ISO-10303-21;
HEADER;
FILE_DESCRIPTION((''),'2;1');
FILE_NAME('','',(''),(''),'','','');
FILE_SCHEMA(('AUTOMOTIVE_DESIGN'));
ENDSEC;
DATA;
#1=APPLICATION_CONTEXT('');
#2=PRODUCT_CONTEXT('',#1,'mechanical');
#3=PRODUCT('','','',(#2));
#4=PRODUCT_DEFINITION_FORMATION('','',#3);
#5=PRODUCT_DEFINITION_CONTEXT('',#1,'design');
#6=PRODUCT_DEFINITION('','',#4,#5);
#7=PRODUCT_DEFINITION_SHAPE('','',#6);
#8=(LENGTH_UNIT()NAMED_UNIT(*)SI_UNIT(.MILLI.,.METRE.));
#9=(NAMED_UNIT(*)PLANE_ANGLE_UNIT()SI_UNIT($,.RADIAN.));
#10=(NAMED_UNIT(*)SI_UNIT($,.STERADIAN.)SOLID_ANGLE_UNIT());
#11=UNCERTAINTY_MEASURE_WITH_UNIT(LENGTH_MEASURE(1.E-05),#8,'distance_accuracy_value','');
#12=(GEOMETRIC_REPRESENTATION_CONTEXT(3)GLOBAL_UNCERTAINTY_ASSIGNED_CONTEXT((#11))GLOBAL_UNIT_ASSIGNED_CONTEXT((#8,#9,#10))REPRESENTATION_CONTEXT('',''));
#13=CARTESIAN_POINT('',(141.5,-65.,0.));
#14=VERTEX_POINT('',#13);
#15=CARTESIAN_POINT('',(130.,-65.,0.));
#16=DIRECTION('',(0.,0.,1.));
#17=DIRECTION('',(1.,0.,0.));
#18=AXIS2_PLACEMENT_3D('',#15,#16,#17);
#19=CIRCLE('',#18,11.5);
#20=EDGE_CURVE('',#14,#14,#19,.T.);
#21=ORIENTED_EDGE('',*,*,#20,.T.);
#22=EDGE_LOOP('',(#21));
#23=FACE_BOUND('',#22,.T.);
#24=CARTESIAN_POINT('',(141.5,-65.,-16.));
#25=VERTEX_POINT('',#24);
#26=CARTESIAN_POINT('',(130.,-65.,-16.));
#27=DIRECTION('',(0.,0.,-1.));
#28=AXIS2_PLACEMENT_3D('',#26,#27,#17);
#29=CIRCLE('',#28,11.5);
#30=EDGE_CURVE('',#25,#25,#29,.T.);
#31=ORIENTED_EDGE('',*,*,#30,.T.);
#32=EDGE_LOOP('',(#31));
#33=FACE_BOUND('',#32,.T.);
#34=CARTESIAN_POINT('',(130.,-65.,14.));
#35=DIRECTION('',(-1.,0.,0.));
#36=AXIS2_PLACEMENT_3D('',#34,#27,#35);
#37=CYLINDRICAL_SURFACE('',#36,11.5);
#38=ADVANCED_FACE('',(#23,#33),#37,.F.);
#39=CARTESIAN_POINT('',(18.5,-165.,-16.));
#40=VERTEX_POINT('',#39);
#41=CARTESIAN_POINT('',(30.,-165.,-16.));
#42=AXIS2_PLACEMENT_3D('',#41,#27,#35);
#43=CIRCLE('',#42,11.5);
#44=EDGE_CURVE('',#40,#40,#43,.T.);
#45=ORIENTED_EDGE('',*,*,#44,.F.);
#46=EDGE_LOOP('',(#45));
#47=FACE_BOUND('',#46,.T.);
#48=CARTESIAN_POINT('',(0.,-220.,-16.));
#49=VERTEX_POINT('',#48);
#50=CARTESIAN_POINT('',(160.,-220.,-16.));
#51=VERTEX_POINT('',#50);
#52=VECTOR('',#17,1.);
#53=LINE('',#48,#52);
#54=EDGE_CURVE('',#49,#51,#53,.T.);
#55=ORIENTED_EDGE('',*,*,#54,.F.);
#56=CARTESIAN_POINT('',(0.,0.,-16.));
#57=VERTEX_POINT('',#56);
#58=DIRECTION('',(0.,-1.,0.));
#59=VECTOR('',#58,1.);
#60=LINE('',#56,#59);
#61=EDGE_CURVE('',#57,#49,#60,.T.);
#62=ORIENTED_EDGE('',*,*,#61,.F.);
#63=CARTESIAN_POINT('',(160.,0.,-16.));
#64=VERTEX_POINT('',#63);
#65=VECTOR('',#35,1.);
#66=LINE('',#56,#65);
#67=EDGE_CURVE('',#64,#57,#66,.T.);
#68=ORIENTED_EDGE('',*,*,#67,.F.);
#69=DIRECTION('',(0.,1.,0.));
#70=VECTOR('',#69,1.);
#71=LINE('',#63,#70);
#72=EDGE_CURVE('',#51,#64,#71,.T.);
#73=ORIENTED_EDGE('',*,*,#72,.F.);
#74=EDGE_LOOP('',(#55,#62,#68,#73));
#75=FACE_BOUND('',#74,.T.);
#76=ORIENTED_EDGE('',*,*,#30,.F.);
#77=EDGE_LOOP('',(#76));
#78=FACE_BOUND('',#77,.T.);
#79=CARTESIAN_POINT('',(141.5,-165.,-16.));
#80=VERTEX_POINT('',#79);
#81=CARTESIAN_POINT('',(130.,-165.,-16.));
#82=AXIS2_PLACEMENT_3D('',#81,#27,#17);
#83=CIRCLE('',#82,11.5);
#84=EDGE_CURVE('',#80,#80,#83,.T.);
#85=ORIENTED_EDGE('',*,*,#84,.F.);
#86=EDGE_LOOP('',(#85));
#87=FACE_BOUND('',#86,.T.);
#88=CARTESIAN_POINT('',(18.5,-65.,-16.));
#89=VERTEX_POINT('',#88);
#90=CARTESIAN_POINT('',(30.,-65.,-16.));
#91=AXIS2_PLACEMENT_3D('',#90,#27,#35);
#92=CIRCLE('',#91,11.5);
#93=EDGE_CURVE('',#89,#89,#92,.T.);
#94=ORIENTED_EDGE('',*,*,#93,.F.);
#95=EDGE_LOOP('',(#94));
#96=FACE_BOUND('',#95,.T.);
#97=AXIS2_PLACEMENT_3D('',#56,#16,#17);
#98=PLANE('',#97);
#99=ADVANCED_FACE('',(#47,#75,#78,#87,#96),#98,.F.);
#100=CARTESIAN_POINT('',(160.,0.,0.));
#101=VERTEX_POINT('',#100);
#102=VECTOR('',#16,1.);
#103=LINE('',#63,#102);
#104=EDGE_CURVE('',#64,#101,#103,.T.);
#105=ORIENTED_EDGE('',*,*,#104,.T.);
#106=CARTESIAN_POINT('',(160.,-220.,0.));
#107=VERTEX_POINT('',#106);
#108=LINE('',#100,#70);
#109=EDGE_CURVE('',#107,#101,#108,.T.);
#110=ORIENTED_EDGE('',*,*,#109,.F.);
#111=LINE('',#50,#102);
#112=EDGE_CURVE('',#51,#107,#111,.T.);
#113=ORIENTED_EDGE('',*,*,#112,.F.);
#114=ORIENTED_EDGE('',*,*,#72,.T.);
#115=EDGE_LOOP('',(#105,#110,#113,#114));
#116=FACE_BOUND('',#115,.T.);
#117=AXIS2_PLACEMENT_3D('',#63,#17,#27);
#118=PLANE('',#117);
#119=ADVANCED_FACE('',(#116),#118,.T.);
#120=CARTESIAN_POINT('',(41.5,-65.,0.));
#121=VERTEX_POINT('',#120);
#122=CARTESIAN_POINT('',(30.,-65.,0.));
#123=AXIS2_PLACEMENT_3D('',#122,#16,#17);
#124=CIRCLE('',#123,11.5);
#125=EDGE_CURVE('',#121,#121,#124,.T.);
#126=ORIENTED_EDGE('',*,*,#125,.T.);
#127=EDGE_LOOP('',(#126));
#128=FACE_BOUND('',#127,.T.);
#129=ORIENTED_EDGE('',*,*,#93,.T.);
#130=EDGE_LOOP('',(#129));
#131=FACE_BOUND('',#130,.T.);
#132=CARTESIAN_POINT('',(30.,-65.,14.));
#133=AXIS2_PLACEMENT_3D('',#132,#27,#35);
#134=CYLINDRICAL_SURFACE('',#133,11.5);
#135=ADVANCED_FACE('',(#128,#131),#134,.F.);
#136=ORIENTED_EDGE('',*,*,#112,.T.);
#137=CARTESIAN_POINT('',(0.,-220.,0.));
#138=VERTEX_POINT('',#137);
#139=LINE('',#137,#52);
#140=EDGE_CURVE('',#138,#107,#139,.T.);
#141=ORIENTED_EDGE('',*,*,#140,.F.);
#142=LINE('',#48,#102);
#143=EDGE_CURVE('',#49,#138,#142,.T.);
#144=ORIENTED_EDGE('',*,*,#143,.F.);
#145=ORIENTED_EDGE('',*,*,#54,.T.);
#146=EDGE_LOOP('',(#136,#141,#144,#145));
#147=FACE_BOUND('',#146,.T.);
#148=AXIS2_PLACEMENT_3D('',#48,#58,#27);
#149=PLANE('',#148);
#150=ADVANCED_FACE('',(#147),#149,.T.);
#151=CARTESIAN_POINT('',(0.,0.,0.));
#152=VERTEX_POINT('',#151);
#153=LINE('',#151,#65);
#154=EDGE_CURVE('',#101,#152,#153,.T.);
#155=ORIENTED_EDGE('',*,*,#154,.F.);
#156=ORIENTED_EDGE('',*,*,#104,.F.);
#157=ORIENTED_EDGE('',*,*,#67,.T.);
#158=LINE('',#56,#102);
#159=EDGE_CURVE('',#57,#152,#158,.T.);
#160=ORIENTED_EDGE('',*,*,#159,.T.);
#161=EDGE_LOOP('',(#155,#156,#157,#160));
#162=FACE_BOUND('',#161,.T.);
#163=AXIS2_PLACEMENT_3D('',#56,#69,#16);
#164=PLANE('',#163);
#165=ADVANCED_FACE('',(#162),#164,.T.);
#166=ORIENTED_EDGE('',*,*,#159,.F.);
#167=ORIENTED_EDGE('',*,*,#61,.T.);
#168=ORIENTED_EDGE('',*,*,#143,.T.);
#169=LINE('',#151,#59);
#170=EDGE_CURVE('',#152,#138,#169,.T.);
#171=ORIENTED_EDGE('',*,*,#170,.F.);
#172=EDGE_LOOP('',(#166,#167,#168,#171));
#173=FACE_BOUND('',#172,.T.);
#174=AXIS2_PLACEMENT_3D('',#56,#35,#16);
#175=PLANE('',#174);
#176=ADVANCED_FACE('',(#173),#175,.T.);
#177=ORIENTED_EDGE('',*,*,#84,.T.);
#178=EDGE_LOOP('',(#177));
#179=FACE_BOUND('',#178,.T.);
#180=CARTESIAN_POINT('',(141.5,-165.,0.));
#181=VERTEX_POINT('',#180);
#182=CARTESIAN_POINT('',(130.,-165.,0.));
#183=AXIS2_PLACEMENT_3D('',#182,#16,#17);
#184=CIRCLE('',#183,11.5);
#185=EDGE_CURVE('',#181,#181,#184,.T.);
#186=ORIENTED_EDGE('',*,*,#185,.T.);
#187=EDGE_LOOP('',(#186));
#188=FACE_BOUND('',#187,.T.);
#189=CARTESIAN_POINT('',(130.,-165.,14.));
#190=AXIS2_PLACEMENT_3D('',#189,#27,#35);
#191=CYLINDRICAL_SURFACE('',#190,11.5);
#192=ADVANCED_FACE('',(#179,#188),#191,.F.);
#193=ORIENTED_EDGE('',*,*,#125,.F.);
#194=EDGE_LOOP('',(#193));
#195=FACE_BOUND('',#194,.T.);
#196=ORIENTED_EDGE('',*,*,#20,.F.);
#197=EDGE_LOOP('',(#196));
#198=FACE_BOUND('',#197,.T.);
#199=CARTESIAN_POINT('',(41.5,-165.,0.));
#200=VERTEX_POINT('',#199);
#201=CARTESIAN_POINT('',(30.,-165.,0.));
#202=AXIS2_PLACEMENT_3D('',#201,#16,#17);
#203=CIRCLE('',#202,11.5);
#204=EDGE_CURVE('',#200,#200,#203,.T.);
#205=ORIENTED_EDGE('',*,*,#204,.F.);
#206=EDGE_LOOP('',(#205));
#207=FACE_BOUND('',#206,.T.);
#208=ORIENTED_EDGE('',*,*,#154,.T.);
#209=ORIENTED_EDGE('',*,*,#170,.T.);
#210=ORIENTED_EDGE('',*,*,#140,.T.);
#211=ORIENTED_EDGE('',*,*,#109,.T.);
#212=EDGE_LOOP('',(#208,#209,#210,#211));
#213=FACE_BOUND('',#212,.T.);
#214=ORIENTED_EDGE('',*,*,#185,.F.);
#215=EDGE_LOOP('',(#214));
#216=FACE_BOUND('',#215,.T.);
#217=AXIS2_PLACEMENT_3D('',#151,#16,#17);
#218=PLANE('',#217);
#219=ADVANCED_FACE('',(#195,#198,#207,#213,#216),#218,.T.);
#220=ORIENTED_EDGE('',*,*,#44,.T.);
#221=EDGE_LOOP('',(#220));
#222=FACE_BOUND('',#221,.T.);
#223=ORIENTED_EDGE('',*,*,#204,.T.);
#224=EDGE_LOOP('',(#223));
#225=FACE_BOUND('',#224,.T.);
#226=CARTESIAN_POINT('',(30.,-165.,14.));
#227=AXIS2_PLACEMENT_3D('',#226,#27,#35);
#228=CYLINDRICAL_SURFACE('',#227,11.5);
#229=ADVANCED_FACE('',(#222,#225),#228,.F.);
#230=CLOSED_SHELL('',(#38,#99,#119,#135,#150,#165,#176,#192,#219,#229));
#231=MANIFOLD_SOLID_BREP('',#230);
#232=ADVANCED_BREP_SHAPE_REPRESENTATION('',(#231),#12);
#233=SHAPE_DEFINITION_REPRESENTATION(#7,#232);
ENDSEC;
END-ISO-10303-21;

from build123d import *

# Parameters (mm, degrees)
SKETCH_1_W             = 160
SKETCH_1_H             = 220
SM_BASE_FLANGE_1_DEPTH = 16
SKETCH_2_R             = 11.5
CUT_EXTRUDE_1_DEPTH    = 30


# Sheet-metal steps are written as plain solids
with BuildPart() as part:
    # Sketch 1 → Базовая кромка1 (new body)
    with BuildSketch(Plane.XY):
        with Locations((80, -110)):
            Rectangle(SKETCH_1_W, SKETCH_1_H)
    extrude(amount=-SM_BASE_FLANGE_1_DEPTH)

    # Sketch 2 → Вырез-Вытянуть1 (cut)
    with BuildSketch(Plane(origin=(0, 0, -16), x_dir=(-1, 0, 0), z_dir=(0, 0, -1))):
        with Locations((-30, -165)):
            Circle(SKETCH_2_R)
        with Locations((-30, -65)):
            Circle(SKETCH_2_R)
        with Locations(Location((-130, -165, 0), (0, 0, 180))):
            Circle(SKETCH_2_R)
        with Locations(Location((-130, -65, 0), (0, 0, 180))):
            Circle(SKETCH_2_R)
    extrude(amount=-CUT_EXTRUDE_1_DEPTH, mode=Mode.SUBTRACT)


solid = part.part
